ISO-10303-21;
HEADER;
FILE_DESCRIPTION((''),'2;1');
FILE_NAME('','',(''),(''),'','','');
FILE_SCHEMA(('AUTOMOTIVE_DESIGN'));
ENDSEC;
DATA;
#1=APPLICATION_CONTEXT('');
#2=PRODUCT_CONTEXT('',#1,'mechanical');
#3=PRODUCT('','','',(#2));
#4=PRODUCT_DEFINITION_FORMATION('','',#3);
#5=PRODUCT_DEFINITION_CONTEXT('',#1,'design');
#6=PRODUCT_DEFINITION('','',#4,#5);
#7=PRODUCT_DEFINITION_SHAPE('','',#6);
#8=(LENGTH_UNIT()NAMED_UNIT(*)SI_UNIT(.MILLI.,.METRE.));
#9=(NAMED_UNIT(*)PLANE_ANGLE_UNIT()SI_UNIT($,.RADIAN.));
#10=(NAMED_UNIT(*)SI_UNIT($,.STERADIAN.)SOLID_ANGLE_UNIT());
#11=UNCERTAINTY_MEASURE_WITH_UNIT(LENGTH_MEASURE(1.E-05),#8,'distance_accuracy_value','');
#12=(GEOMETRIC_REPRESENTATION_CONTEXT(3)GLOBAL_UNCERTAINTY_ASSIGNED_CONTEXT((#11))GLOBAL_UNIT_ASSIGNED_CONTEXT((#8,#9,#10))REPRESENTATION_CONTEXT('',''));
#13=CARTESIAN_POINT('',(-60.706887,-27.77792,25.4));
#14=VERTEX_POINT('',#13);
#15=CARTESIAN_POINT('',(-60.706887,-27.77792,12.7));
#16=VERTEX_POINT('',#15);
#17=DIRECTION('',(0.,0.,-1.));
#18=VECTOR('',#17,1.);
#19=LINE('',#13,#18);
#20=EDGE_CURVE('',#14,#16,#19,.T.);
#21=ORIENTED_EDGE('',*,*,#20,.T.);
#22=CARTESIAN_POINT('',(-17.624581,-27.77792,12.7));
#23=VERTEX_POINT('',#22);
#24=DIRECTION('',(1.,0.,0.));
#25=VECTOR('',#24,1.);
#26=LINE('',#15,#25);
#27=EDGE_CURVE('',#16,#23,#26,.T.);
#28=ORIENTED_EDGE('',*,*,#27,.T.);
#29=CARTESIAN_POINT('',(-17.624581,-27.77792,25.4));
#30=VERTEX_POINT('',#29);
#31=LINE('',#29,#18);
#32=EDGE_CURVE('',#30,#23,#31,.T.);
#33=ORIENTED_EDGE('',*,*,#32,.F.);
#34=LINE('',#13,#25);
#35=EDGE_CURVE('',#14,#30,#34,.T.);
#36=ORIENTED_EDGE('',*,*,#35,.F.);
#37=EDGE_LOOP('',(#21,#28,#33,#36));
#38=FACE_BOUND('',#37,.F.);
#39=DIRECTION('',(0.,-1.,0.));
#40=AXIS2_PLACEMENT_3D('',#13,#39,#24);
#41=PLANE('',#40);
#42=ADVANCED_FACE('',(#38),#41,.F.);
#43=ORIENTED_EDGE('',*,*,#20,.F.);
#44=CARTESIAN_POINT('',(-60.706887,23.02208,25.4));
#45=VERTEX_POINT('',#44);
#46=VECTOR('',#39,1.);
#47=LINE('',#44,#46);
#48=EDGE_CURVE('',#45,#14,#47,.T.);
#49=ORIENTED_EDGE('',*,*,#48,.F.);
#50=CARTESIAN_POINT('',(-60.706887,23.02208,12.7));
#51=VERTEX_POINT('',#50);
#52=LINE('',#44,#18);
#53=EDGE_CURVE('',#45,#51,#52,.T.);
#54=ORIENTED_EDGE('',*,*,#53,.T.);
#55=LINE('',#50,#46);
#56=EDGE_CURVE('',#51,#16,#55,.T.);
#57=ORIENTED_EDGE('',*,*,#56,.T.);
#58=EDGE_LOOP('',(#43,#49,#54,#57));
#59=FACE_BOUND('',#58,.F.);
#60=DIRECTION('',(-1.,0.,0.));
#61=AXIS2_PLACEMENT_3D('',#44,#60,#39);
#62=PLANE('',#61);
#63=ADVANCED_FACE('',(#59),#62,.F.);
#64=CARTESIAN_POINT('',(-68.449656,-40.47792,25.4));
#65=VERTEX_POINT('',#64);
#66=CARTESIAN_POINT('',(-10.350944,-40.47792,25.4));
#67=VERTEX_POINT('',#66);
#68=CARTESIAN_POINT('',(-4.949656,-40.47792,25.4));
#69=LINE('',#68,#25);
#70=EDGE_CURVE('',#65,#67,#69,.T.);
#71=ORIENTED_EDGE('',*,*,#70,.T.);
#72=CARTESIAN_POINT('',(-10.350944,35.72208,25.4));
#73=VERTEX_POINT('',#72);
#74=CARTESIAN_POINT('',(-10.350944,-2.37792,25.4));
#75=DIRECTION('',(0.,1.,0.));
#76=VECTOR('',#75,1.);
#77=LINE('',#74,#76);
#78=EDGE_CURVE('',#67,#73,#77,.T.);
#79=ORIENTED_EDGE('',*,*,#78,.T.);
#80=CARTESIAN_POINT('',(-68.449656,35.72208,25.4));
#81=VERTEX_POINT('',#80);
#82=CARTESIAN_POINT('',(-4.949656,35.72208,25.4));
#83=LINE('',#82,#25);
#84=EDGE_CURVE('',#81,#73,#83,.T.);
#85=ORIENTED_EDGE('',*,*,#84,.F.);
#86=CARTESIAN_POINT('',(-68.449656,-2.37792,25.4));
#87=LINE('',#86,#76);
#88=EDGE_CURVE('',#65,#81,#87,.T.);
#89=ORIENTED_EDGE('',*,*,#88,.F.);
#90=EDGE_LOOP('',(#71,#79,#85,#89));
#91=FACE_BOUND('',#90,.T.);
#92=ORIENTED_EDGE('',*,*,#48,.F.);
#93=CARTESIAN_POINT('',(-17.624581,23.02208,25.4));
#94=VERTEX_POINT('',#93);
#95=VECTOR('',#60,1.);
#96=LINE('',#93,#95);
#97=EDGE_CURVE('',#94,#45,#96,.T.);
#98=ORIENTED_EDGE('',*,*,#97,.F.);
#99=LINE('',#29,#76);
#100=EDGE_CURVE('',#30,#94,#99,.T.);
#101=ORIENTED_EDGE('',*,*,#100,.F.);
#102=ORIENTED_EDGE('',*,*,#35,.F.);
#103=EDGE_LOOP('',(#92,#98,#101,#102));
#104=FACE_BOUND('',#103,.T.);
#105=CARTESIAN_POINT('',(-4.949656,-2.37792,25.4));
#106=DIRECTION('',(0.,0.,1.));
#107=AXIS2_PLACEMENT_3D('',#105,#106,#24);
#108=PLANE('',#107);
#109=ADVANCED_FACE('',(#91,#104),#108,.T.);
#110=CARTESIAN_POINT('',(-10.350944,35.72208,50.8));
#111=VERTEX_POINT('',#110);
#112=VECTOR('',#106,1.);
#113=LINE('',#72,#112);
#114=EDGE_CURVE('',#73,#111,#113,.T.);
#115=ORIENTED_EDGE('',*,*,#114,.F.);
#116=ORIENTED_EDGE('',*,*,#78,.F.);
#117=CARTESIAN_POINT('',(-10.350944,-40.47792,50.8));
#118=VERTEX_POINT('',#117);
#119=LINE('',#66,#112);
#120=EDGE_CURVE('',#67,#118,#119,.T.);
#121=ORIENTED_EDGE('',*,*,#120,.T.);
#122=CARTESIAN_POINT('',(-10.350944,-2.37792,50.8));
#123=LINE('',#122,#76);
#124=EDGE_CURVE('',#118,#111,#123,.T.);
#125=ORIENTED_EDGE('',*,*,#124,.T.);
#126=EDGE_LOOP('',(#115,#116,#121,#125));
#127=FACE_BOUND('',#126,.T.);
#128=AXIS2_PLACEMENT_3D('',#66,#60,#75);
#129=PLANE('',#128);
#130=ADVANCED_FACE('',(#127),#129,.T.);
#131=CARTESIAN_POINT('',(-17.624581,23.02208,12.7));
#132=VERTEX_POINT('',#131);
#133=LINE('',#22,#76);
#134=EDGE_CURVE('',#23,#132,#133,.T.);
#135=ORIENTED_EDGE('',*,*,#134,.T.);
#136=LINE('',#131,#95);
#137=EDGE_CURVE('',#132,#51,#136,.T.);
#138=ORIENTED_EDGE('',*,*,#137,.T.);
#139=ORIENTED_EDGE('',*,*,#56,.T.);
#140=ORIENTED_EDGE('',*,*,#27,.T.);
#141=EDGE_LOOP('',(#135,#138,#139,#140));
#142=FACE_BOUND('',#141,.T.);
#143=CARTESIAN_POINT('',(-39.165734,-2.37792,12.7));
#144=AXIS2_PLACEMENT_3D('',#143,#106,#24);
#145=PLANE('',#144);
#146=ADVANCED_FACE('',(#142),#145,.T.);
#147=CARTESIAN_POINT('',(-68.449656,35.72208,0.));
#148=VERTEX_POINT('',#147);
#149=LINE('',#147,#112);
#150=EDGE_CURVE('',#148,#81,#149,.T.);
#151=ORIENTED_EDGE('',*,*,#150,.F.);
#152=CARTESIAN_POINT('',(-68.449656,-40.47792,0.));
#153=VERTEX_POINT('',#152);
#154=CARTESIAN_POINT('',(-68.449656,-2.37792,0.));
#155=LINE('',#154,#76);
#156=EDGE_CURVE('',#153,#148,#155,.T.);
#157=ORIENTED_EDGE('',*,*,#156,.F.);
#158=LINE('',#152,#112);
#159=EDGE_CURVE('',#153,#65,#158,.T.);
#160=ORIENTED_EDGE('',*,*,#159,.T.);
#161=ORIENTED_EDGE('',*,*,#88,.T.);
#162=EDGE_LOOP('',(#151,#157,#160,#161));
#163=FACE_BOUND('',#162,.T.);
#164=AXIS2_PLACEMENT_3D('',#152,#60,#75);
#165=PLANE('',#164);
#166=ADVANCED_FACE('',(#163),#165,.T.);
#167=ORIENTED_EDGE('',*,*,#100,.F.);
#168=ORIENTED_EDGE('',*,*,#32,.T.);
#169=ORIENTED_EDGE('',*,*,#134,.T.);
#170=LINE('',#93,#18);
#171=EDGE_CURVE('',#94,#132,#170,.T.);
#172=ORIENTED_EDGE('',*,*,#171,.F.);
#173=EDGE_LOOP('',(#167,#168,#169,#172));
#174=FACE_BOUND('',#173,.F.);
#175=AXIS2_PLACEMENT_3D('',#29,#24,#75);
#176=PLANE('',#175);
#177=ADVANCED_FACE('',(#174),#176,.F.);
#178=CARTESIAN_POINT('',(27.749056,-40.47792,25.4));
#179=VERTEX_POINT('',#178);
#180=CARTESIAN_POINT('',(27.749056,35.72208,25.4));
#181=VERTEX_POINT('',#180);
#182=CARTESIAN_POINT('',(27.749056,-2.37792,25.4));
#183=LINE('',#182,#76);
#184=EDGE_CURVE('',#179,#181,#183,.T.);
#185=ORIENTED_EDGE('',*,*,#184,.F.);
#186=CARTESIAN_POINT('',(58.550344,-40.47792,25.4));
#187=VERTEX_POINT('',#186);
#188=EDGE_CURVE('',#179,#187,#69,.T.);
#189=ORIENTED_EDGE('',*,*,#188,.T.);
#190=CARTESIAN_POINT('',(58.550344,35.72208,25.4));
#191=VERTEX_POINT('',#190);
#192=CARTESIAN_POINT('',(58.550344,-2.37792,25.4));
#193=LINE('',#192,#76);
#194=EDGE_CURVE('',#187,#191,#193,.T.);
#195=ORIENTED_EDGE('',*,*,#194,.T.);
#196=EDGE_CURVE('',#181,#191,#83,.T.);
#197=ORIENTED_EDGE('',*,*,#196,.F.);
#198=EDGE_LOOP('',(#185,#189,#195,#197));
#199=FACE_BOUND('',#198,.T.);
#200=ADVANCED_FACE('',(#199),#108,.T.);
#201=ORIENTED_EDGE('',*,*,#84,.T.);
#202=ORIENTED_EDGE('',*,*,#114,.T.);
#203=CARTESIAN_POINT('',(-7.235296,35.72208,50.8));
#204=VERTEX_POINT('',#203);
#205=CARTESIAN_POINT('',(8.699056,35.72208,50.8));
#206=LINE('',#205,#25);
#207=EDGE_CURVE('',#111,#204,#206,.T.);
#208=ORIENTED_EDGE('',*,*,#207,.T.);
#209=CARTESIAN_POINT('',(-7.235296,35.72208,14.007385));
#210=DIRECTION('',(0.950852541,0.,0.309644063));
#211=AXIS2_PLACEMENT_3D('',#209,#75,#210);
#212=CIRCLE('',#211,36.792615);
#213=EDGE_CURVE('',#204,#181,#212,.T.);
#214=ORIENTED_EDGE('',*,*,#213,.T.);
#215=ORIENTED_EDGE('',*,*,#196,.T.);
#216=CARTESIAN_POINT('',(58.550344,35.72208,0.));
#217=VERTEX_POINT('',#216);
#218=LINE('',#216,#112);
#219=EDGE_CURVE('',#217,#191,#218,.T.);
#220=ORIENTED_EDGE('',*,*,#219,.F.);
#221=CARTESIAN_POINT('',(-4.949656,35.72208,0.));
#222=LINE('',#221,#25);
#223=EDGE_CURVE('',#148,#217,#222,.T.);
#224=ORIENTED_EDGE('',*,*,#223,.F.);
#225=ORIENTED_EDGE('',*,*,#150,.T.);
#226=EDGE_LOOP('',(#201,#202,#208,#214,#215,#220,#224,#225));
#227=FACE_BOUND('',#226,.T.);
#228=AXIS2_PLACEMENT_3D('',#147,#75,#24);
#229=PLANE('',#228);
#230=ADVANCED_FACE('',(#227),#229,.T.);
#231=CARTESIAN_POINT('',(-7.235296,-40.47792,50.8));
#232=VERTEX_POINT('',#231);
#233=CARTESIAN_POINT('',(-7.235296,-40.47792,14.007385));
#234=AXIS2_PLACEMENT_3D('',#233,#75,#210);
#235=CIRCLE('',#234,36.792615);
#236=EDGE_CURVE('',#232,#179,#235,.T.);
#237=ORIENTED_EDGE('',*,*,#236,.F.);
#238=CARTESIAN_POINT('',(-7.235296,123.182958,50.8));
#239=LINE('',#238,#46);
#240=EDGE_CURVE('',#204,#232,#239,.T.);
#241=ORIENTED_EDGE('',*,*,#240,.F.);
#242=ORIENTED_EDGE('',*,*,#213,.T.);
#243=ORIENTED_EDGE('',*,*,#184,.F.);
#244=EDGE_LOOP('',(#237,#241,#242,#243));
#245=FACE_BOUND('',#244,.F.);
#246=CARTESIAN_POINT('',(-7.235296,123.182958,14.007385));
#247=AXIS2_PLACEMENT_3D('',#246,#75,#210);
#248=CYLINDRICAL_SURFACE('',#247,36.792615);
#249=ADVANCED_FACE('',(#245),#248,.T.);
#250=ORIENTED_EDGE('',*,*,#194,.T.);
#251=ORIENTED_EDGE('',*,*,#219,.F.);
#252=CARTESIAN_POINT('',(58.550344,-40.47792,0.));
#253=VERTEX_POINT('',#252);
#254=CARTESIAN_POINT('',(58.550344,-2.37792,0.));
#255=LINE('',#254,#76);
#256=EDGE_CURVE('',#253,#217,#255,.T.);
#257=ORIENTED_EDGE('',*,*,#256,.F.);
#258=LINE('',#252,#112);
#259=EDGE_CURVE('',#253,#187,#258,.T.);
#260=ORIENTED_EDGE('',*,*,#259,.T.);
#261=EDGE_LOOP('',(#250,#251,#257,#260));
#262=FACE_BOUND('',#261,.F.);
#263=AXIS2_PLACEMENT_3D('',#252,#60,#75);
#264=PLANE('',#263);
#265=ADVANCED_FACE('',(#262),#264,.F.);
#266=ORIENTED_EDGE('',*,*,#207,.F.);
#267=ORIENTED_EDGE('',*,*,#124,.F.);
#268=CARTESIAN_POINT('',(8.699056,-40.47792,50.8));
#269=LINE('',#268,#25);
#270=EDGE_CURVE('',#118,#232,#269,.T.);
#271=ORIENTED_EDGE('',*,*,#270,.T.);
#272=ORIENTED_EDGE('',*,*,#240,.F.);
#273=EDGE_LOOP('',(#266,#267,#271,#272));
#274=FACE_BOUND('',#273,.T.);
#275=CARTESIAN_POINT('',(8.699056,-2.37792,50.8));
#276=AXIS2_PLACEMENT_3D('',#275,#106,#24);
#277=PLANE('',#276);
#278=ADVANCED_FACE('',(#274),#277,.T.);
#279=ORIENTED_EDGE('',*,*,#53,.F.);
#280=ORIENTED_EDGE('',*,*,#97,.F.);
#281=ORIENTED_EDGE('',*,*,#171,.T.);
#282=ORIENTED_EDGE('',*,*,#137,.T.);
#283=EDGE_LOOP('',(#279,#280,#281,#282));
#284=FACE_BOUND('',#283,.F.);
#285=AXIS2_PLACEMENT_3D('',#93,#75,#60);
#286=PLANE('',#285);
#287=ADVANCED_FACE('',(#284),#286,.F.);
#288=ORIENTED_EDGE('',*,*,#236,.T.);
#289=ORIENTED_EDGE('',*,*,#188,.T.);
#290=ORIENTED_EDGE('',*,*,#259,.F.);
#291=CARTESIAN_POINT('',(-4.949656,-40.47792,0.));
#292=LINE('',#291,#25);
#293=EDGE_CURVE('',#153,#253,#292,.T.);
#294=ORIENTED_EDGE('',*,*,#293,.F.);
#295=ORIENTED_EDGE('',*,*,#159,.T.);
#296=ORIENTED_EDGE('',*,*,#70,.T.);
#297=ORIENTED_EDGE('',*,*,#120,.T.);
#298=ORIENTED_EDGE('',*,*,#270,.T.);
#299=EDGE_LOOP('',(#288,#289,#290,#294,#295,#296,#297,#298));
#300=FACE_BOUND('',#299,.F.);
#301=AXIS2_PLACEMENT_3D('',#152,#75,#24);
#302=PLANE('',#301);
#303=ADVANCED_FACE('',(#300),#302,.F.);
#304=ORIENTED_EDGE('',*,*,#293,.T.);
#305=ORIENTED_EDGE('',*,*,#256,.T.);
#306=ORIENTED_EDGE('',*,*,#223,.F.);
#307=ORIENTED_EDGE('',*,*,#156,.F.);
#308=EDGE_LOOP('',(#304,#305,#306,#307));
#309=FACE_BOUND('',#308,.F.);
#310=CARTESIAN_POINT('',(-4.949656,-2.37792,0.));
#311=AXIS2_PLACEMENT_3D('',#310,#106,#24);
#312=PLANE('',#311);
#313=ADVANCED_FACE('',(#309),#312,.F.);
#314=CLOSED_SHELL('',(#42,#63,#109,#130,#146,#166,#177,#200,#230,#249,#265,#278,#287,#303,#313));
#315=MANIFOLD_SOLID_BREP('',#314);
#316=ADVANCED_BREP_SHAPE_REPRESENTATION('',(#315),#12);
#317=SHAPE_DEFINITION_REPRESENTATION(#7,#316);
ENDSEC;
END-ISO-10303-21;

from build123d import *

# Parameters (mm, degrees)
F0_W        = 127
F0_H        = 76.2
F1_DEPTH    = 25.4
F2_W        = 38.1
F2_H        = 76.2
F3_DEPTH    = 25.4
F4_T1_DEPTH = 251.1217558139
F6_DEPTH    = 12.7


# Not quite as in the source:
# - a fillet or chamfer that OpenCascade refuses, or shapes differently, is made with other operations: its cross-section is extruded or revolved along the edge and cut away or added


with BuildPart() as f1:
    # F0 (on Top) → F1 (new body)
    with BuildSketch(Plane.XY):
        with Locations((-4.94965637, -2.3779198527)):
            Rectangle(F0_W, F0_H)
    extrude(amount=F1_DEPTH)

    # F2 (on face) → F3 (join)
    with BuildSketch(Plane.XY.offset(25.4)):
        with Locations((8.6990555257, -2.3779198527)):
            Rectangle(F2_W, F2_H)
    extrude(amount=F3_DEPTH)

    # F4: fillet of radius 36.7926146906 on 1 edges, made by hand

    # F4_s2 → F4_t1 (cut)
    with BuildSketch(Plane.XZ.offset(-123.1829580542)):
        with BuildLine():
            ThreePointArc((27.7490555257, 25.4), (14.3810455558, 43.7803644885), (-7.2352956371, 50.8))
            Line((-7.2352956371, 50.8), (27.7490555257, 50.8))
            Line((27.7490555257, 50.8), (27.7490555257, 25.4))
        make_face()
    extrude(amount=F4_T1_DEPTH, mode=Mode.SUBTRACT)

    # F5 (on face) → F6 (cut)
    with BuildSketch(Plane.XY.offset(25.4)):
        Polygon((-39.4003004222, 23.0220801473), (-60.7068873942, 23.0220801473), (-60.7068873942, -27.7779198527), (-39.4003004222, -27.7779198527), (-17.6245812327, -27.7779198527), (-17.6245812327, 23.0220801473), align=None)
    extrude(amount=-F6_DEPTH, mode=Mode.SUBTRACT)


solid = f1.part
